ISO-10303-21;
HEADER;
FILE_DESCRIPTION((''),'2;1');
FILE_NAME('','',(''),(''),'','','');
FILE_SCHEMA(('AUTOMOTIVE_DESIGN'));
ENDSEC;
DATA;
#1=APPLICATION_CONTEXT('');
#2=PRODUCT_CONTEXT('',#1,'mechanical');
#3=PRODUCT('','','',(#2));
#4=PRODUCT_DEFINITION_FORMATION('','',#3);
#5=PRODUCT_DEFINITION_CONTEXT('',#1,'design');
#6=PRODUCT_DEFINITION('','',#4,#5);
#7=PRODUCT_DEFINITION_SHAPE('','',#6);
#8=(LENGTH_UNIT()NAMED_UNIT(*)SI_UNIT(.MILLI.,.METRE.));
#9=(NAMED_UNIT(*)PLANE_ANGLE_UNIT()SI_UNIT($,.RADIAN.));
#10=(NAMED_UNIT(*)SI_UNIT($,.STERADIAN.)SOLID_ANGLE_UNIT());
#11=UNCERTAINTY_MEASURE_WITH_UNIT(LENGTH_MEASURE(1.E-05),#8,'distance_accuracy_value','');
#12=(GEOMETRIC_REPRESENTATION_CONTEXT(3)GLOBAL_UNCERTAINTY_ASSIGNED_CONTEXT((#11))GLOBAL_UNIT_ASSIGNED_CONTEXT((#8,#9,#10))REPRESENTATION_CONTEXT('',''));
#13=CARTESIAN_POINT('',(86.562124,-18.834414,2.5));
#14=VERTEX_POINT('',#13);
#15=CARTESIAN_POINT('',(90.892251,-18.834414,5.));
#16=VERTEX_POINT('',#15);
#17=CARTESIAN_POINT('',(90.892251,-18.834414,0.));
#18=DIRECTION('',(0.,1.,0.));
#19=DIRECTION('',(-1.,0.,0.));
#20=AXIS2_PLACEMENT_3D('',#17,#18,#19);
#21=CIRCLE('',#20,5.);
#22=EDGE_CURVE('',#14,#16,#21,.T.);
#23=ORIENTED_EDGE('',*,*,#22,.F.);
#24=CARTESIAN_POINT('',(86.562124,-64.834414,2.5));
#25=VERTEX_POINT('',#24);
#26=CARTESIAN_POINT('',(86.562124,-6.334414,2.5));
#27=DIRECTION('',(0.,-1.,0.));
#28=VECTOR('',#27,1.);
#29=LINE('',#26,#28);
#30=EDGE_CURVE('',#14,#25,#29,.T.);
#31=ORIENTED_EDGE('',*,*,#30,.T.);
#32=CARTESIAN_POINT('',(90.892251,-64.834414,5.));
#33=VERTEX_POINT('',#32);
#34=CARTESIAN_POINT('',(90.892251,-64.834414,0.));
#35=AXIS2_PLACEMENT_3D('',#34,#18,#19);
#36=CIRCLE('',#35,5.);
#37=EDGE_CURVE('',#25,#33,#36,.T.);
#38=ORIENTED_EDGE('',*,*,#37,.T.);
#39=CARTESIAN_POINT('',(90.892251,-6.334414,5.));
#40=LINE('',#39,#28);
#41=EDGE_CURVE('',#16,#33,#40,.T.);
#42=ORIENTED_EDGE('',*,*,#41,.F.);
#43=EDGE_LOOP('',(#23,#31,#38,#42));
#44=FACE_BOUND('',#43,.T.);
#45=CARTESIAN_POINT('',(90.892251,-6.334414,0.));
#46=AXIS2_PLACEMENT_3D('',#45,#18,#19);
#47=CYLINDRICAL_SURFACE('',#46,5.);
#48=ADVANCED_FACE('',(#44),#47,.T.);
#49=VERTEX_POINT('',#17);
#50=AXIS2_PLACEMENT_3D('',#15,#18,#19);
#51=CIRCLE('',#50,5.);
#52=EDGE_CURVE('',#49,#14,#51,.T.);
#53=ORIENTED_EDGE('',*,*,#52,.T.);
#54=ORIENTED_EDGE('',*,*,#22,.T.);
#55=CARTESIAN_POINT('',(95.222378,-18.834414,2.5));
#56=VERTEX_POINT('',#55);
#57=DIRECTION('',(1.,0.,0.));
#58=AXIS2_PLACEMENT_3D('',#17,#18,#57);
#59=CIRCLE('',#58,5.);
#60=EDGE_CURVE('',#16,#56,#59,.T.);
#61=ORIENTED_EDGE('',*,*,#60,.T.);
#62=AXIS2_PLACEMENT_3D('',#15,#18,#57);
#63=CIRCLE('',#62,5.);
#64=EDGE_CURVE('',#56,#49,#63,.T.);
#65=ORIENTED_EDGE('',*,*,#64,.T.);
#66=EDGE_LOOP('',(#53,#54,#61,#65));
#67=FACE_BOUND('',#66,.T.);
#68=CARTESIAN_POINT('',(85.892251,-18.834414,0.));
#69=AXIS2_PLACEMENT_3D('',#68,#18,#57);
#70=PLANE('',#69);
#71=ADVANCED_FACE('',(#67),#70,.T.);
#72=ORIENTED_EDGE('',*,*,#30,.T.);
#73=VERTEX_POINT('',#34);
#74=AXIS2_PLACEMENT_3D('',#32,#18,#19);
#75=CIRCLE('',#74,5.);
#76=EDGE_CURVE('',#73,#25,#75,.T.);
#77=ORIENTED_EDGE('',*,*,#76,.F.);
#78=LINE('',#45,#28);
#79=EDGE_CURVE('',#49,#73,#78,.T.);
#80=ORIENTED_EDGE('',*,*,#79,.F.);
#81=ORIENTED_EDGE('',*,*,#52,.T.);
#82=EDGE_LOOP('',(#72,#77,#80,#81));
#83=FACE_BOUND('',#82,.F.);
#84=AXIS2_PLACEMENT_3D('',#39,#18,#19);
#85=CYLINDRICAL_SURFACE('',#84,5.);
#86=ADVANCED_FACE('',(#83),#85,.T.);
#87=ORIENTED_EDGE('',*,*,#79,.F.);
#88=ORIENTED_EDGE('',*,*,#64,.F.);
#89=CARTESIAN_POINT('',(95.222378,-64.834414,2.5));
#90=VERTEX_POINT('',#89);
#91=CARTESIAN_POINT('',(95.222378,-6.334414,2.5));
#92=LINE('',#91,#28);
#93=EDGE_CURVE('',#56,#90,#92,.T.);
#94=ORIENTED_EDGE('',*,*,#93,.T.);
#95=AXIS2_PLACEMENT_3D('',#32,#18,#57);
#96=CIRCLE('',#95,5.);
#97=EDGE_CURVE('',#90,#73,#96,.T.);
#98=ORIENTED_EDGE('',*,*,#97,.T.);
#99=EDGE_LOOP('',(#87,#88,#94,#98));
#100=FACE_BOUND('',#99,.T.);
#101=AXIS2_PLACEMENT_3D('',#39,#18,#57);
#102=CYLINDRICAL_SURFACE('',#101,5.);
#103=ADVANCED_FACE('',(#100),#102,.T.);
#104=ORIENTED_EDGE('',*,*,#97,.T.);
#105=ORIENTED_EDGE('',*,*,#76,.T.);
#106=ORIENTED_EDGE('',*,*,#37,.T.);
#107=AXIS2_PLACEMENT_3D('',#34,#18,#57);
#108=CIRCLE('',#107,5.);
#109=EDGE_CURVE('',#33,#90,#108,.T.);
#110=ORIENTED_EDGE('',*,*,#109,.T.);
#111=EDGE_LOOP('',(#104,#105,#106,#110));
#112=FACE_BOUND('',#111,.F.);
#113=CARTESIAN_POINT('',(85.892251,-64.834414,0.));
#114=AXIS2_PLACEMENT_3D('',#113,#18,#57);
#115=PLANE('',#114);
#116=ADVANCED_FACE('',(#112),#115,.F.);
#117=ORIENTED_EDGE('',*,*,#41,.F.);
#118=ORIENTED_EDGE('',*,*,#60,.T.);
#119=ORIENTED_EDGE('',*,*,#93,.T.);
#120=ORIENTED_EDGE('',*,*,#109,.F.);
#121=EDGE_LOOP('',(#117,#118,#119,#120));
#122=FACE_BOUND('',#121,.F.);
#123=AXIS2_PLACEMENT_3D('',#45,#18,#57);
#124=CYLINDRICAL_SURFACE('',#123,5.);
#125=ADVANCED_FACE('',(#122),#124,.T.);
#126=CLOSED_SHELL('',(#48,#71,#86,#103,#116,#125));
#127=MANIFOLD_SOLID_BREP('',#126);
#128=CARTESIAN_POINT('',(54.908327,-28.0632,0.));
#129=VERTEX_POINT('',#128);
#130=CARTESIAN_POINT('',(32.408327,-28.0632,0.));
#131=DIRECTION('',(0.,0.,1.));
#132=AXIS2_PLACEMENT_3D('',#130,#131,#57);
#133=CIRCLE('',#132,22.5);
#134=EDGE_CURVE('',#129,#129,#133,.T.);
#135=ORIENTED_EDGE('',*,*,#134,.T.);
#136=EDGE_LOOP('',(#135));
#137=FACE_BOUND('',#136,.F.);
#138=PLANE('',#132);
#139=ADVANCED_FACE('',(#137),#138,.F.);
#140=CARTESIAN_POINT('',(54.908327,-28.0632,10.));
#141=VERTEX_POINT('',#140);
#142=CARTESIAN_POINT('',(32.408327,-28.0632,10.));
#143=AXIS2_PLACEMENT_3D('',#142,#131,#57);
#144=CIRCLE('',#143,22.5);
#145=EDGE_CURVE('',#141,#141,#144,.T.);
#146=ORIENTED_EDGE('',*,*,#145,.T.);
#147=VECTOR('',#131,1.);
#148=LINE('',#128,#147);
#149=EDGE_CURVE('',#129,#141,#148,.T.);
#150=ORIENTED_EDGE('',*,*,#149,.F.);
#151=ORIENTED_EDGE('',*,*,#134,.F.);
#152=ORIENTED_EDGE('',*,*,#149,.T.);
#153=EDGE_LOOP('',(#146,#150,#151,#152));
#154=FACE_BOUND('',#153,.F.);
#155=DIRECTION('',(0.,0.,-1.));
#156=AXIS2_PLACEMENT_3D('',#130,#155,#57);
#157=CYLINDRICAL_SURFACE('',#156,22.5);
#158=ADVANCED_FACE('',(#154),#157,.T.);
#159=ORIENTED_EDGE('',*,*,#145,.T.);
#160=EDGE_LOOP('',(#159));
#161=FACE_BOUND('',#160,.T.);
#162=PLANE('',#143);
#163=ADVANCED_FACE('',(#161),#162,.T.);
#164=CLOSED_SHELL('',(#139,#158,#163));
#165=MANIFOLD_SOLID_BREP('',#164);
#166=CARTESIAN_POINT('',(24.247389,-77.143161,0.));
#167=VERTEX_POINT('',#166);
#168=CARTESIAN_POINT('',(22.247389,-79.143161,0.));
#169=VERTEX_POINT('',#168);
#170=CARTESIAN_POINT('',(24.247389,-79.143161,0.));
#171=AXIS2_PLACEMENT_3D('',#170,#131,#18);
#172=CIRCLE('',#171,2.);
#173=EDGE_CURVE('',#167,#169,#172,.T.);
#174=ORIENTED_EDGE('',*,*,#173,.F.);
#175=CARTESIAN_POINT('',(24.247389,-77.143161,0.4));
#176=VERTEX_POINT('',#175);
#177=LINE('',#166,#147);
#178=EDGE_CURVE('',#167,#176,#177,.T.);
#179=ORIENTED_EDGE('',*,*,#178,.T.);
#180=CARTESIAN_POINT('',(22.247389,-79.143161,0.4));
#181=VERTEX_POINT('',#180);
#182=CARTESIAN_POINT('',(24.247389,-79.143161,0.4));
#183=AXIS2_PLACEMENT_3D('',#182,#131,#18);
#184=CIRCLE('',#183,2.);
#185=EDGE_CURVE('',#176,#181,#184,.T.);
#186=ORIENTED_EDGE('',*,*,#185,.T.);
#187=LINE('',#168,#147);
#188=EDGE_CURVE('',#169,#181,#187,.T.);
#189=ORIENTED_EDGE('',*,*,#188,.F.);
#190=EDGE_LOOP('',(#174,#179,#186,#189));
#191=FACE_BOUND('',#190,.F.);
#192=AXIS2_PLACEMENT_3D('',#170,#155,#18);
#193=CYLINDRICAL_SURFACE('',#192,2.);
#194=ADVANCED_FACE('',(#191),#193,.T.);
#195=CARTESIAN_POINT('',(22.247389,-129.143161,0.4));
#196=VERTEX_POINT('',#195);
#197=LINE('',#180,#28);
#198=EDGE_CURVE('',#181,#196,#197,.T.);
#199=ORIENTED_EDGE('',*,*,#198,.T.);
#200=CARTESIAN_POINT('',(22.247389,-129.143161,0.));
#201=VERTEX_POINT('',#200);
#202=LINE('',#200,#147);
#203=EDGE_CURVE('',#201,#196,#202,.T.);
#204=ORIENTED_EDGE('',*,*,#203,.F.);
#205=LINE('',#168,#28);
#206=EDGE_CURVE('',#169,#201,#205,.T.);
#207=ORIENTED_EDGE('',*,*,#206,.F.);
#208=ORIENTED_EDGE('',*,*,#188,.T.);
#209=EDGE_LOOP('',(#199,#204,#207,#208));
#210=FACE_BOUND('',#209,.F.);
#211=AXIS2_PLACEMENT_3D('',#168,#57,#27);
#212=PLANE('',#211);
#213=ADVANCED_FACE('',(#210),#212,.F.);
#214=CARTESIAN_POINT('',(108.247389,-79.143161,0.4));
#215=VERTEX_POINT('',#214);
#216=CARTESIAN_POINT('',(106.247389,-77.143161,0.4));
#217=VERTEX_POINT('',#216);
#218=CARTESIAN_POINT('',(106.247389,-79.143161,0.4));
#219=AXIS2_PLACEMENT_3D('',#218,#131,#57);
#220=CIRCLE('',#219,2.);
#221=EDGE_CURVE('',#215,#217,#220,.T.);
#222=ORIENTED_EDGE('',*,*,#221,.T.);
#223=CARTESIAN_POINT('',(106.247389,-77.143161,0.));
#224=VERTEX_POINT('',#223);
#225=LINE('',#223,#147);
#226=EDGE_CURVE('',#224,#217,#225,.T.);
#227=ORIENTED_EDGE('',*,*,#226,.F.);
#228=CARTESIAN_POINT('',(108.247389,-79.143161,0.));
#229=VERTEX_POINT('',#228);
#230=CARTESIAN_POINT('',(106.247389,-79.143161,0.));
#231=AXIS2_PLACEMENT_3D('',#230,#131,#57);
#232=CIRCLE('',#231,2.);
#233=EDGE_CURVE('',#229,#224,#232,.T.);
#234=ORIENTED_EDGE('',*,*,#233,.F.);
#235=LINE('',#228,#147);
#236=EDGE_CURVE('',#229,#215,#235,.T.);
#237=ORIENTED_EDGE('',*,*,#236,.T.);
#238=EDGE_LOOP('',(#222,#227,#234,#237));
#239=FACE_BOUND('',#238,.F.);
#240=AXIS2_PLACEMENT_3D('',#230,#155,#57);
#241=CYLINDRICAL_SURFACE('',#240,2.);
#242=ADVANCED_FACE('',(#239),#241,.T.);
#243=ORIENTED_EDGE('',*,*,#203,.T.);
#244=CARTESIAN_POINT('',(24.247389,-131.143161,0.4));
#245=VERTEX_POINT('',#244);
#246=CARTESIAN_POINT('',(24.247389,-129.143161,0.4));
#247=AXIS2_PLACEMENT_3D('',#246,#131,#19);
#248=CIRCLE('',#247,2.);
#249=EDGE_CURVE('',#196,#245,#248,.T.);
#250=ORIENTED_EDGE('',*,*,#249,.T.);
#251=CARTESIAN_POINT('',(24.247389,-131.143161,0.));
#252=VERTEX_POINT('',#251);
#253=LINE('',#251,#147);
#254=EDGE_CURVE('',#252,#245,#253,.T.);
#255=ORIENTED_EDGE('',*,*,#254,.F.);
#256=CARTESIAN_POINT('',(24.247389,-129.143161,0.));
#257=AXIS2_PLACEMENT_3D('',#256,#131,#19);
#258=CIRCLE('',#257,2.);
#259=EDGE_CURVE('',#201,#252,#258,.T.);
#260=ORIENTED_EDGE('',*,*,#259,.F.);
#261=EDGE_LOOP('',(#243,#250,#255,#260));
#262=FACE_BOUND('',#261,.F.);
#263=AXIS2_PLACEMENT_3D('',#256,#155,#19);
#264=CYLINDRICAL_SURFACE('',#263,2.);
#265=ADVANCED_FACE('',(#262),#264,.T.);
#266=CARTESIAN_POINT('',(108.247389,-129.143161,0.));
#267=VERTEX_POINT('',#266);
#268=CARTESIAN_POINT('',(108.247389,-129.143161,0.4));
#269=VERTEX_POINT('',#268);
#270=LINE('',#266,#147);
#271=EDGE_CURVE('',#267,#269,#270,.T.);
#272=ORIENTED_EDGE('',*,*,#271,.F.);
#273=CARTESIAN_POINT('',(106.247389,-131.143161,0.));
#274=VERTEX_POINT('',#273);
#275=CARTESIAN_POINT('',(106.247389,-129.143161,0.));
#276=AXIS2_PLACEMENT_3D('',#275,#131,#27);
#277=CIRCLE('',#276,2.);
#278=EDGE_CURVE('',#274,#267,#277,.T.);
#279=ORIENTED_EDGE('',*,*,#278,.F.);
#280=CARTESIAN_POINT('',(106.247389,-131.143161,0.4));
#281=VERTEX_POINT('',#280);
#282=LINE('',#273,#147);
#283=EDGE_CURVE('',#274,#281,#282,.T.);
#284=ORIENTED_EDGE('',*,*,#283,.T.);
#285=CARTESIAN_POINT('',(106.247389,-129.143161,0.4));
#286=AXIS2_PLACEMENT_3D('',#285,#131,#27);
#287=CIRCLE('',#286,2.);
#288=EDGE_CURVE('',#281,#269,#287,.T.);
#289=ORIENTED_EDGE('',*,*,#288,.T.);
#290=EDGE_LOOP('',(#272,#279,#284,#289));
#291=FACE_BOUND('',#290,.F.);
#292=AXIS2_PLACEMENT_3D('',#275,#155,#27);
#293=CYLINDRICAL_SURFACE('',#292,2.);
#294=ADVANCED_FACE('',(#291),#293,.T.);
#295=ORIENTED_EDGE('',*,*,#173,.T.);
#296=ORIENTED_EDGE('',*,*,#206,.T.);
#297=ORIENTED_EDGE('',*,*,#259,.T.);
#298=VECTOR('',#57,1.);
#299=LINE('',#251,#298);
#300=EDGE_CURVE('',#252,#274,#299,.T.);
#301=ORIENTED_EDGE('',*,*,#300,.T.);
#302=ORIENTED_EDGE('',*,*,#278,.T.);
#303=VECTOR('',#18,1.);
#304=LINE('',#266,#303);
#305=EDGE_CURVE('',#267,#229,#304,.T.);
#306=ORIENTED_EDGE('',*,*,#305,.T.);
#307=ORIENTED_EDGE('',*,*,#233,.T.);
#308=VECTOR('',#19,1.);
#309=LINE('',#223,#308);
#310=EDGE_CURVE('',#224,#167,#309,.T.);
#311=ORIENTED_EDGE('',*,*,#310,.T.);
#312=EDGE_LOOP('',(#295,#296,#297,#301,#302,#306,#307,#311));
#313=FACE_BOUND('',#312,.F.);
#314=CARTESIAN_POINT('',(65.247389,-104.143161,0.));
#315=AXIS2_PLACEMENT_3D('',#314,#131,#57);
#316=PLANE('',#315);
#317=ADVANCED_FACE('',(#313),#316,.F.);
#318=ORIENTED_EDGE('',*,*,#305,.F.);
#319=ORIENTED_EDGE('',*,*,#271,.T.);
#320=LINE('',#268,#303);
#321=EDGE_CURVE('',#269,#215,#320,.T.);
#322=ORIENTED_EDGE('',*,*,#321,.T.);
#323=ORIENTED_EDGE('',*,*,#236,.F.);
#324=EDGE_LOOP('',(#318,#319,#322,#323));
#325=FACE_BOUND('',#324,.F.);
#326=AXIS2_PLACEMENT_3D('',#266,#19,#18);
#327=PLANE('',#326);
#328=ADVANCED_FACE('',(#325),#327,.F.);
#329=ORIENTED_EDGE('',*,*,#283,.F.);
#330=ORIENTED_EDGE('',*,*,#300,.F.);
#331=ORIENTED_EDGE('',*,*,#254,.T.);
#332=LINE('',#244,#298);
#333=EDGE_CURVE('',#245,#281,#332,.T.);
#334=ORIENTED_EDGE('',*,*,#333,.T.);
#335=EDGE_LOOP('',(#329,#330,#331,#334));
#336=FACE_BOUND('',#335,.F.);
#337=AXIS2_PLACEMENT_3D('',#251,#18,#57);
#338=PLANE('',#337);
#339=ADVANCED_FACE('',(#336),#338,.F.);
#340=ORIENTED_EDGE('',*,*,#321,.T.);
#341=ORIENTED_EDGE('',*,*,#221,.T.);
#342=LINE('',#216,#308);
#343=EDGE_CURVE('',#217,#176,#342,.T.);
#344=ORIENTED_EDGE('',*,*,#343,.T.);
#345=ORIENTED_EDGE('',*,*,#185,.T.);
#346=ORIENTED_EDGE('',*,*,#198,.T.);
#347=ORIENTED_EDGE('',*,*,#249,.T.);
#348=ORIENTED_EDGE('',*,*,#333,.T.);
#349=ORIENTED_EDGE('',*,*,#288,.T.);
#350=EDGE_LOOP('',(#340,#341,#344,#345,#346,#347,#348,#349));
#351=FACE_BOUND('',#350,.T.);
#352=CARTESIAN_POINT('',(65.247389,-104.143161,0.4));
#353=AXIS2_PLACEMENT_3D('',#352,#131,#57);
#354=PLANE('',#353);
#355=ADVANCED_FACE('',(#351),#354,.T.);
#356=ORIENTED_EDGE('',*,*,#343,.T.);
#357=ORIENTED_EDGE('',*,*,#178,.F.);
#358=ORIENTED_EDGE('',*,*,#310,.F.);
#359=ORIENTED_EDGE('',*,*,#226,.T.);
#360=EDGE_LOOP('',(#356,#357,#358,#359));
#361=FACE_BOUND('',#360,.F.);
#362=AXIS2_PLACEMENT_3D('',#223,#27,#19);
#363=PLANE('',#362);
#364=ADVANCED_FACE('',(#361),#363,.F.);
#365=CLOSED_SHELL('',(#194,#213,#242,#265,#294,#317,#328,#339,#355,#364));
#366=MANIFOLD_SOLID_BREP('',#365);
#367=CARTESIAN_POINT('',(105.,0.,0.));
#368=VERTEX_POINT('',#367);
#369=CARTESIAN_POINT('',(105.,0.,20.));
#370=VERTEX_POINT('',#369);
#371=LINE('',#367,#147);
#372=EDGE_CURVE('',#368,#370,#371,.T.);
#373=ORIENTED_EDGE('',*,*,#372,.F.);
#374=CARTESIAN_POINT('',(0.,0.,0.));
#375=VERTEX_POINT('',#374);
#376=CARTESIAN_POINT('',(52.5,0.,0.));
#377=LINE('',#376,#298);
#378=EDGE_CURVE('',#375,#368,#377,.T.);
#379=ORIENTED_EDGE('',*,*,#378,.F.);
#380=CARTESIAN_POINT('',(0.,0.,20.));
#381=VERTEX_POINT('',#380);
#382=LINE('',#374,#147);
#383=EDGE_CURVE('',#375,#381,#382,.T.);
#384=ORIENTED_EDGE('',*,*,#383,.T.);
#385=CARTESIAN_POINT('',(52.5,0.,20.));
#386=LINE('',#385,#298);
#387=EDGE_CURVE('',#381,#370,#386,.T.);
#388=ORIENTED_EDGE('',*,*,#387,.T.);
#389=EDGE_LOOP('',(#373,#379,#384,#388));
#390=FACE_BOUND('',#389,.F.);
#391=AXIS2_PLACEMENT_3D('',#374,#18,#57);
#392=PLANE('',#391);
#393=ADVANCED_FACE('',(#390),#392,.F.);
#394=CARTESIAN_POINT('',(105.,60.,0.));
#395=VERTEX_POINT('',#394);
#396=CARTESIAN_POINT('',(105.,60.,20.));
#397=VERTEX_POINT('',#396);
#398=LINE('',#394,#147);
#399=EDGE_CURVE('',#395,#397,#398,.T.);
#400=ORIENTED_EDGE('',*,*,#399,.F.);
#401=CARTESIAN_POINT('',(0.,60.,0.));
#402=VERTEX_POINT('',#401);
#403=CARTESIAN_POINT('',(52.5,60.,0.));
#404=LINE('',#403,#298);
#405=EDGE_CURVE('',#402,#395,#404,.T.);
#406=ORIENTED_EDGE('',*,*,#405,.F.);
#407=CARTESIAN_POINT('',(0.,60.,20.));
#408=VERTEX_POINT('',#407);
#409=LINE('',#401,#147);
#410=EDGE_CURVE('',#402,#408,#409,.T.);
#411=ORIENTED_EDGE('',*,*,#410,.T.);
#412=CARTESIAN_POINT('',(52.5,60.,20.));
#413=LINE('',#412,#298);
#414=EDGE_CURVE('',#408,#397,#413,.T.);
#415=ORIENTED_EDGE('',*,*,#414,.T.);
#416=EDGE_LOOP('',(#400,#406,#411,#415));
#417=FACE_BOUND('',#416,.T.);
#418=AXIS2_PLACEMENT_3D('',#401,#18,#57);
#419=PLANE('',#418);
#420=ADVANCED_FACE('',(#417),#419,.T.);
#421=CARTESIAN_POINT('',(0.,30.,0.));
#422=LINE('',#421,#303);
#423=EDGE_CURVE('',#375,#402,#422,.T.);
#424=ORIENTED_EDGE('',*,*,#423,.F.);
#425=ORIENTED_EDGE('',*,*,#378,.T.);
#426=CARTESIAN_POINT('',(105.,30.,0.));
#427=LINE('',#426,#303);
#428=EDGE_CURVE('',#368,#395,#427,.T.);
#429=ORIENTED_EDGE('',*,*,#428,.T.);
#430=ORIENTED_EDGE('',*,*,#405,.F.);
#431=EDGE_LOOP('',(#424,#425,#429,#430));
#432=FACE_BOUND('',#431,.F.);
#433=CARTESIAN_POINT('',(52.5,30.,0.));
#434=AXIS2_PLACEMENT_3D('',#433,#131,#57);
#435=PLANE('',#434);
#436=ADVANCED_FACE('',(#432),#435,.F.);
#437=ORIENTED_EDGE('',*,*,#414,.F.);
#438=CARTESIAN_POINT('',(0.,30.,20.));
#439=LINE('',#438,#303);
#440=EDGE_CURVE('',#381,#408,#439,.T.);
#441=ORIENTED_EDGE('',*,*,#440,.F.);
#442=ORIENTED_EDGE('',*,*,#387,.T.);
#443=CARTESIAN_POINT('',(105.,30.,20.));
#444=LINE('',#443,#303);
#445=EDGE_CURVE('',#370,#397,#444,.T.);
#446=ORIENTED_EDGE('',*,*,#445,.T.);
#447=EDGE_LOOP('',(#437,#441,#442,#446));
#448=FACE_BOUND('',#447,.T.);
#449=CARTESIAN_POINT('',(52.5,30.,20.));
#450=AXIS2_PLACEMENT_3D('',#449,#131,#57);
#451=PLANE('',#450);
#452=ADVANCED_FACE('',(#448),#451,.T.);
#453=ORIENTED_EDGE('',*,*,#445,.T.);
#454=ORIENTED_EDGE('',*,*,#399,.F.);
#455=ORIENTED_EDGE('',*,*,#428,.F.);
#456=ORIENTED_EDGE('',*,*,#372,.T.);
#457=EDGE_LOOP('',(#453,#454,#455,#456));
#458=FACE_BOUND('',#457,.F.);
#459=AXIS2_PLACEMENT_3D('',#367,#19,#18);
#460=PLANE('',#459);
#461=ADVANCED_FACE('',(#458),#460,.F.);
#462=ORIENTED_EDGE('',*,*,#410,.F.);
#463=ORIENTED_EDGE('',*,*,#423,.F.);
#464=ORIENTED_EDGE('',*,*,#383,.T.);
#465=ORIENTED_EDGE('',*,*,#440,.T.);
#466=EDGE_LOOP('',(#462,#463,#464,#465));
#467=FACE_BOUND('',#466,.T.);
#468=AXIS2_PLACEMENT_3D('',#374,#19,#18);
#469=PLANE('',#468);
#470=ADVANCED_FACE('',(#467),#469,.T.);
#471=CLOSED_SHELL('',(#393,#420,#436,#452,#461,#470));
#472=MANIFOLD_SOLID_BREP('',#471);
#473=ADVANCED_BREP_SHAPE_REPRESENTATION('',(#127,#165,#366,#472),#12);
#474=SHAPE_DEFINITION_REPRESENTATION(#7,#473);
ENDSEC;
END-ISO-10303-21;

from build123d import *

# Parameters (mm, degrees)
F0_W        = 105
F0_H        = 60
F1_DEPTH    = 20
F2_R        = 22.5
F3_DEPTH    = 10
F5_DEPTH    = 0.4
F6_W        = 10
F6_H        = 46
F7_DEPTH    = 5
F8_T1_DEPTH = 71


# Not quite as in the source:
# - a fillet or chamfer that OpenCascade refuses, or shapes differently, is made with other operations: its cross-section is extruded or revolved along the edge and cut away or added


with BuildPart() as f1:
    # F0 (on Top) → F1 (new body)
    with BuildSketch(Plane.XY):
        with Locations((52.5, 30)):
            Rectangle(F0_W, F0_H)
    extrude(amount=F1_DEPTH)


with BuildPart() as f3:
    # F2 (on Top) → F3 (new body)
    with BuildSketch(Plane.XY):
        with Locations((32.4083268642, -28.0632004142)):
            Circle(F2_R)
    extrude(amount=F3_DEPTH)


with BuildPart() as f5:
    # F4 (on Top) → F5 (new body)
    with BuildSketch(Plane.XY):
        with BuildLine():
            Line((106.2473894497, -77.1431613266), (24.2473894497, -77.1431613266))
            ThreePointArc((24.2473894497, -77.1431613266), (22.8331758874, -77.7289477643), (22.2473894497, -79.1431613266))
            Line((22.2473894497, -79.1431613266), (22.2473894497, -129.1431613266))
            ThreePointArc((22.2473894497, -129.1431613266), (22.8331758874, -130.557374889), (24.2473894497, -131.1431613266))
            Line((24.2473894497, -131.1431613266), (106.2473894497, -131.1431613266))
            ThreePointArc((106.2473894497, -131.1431613266), (107.6616030121, -130.557374889), (108.2473894497, -129.1431613266))
            Line((108.2473894497, -129.1431613266), (108.2473894497, -79.1431613266))
            ThreePointArc((108.2473894497, -79.1431613266), (107.6616030121, -77.7289477643), (106.2473894497, -77.1431613266))
        make_face()
    extrude(amount=F5_DEPTH)


with BuildPart() as f7:
    # F6 (on Top) → F7 (new body)
    with BuildSketch(Plane.XY):
        with Locations((90.8922507425, -41.8344140053)):
            Rectangle(F6_W, F6_H)
    extrude(amount=F7_DEPTH)

    # F8: fillet of radius 5 on 4 edges, made by hand

    # F8_s2 → F8_t1 (cut)
    with BuildSketch(Plane.XZ.offset(6.3344140053)):
        with BuildLine():
            ThreePointArc((95.8922507425, 5), (94.4277846484, 1.4644660941), (90.8922507425, 0))
            Line((90.8922507425, 0), (95.8922507425, 0))
            Line((95.8922507425, 0), (95.8922507425, 5))
        make_face()
        with BuildLine():
            ThreePointArc((85.8922507425, 5), (87.3567168366, 1.4644660941), (90.8922507425, 0))
            Line((90.8922507425, 0), (85.8922507425, 0))
            Line((85.8922507425, 0), (85.8922507425, 5))
        make_face()
        with BuildLine():
            ThreePointArc((85.8922507425, 0), (87.3567168366, 3.5355339059), (90.8922507425, 5))
            Line((90.8922507425, 5), (85.8922507425, 5))
            Line((85.8922507425, 5), (85.8922507425, 0))
        make_face()
        with BuildLine():
            ThreePointArc((95.8922507425, 0), (94.4277846484, 3.5355339059), (90.8922507425, 5))
            Line((90.8922507425, 5), (95.8922507425, 5))
            Line((95.8922507425, 5), (95.8922507425, 0))
        make_face()
    extrude(amount=F8_T1_DEPTH, mode=Mode.SUBTRACT)


solid = Compound([f1.part, f3.part, f5.part, f7.part])
